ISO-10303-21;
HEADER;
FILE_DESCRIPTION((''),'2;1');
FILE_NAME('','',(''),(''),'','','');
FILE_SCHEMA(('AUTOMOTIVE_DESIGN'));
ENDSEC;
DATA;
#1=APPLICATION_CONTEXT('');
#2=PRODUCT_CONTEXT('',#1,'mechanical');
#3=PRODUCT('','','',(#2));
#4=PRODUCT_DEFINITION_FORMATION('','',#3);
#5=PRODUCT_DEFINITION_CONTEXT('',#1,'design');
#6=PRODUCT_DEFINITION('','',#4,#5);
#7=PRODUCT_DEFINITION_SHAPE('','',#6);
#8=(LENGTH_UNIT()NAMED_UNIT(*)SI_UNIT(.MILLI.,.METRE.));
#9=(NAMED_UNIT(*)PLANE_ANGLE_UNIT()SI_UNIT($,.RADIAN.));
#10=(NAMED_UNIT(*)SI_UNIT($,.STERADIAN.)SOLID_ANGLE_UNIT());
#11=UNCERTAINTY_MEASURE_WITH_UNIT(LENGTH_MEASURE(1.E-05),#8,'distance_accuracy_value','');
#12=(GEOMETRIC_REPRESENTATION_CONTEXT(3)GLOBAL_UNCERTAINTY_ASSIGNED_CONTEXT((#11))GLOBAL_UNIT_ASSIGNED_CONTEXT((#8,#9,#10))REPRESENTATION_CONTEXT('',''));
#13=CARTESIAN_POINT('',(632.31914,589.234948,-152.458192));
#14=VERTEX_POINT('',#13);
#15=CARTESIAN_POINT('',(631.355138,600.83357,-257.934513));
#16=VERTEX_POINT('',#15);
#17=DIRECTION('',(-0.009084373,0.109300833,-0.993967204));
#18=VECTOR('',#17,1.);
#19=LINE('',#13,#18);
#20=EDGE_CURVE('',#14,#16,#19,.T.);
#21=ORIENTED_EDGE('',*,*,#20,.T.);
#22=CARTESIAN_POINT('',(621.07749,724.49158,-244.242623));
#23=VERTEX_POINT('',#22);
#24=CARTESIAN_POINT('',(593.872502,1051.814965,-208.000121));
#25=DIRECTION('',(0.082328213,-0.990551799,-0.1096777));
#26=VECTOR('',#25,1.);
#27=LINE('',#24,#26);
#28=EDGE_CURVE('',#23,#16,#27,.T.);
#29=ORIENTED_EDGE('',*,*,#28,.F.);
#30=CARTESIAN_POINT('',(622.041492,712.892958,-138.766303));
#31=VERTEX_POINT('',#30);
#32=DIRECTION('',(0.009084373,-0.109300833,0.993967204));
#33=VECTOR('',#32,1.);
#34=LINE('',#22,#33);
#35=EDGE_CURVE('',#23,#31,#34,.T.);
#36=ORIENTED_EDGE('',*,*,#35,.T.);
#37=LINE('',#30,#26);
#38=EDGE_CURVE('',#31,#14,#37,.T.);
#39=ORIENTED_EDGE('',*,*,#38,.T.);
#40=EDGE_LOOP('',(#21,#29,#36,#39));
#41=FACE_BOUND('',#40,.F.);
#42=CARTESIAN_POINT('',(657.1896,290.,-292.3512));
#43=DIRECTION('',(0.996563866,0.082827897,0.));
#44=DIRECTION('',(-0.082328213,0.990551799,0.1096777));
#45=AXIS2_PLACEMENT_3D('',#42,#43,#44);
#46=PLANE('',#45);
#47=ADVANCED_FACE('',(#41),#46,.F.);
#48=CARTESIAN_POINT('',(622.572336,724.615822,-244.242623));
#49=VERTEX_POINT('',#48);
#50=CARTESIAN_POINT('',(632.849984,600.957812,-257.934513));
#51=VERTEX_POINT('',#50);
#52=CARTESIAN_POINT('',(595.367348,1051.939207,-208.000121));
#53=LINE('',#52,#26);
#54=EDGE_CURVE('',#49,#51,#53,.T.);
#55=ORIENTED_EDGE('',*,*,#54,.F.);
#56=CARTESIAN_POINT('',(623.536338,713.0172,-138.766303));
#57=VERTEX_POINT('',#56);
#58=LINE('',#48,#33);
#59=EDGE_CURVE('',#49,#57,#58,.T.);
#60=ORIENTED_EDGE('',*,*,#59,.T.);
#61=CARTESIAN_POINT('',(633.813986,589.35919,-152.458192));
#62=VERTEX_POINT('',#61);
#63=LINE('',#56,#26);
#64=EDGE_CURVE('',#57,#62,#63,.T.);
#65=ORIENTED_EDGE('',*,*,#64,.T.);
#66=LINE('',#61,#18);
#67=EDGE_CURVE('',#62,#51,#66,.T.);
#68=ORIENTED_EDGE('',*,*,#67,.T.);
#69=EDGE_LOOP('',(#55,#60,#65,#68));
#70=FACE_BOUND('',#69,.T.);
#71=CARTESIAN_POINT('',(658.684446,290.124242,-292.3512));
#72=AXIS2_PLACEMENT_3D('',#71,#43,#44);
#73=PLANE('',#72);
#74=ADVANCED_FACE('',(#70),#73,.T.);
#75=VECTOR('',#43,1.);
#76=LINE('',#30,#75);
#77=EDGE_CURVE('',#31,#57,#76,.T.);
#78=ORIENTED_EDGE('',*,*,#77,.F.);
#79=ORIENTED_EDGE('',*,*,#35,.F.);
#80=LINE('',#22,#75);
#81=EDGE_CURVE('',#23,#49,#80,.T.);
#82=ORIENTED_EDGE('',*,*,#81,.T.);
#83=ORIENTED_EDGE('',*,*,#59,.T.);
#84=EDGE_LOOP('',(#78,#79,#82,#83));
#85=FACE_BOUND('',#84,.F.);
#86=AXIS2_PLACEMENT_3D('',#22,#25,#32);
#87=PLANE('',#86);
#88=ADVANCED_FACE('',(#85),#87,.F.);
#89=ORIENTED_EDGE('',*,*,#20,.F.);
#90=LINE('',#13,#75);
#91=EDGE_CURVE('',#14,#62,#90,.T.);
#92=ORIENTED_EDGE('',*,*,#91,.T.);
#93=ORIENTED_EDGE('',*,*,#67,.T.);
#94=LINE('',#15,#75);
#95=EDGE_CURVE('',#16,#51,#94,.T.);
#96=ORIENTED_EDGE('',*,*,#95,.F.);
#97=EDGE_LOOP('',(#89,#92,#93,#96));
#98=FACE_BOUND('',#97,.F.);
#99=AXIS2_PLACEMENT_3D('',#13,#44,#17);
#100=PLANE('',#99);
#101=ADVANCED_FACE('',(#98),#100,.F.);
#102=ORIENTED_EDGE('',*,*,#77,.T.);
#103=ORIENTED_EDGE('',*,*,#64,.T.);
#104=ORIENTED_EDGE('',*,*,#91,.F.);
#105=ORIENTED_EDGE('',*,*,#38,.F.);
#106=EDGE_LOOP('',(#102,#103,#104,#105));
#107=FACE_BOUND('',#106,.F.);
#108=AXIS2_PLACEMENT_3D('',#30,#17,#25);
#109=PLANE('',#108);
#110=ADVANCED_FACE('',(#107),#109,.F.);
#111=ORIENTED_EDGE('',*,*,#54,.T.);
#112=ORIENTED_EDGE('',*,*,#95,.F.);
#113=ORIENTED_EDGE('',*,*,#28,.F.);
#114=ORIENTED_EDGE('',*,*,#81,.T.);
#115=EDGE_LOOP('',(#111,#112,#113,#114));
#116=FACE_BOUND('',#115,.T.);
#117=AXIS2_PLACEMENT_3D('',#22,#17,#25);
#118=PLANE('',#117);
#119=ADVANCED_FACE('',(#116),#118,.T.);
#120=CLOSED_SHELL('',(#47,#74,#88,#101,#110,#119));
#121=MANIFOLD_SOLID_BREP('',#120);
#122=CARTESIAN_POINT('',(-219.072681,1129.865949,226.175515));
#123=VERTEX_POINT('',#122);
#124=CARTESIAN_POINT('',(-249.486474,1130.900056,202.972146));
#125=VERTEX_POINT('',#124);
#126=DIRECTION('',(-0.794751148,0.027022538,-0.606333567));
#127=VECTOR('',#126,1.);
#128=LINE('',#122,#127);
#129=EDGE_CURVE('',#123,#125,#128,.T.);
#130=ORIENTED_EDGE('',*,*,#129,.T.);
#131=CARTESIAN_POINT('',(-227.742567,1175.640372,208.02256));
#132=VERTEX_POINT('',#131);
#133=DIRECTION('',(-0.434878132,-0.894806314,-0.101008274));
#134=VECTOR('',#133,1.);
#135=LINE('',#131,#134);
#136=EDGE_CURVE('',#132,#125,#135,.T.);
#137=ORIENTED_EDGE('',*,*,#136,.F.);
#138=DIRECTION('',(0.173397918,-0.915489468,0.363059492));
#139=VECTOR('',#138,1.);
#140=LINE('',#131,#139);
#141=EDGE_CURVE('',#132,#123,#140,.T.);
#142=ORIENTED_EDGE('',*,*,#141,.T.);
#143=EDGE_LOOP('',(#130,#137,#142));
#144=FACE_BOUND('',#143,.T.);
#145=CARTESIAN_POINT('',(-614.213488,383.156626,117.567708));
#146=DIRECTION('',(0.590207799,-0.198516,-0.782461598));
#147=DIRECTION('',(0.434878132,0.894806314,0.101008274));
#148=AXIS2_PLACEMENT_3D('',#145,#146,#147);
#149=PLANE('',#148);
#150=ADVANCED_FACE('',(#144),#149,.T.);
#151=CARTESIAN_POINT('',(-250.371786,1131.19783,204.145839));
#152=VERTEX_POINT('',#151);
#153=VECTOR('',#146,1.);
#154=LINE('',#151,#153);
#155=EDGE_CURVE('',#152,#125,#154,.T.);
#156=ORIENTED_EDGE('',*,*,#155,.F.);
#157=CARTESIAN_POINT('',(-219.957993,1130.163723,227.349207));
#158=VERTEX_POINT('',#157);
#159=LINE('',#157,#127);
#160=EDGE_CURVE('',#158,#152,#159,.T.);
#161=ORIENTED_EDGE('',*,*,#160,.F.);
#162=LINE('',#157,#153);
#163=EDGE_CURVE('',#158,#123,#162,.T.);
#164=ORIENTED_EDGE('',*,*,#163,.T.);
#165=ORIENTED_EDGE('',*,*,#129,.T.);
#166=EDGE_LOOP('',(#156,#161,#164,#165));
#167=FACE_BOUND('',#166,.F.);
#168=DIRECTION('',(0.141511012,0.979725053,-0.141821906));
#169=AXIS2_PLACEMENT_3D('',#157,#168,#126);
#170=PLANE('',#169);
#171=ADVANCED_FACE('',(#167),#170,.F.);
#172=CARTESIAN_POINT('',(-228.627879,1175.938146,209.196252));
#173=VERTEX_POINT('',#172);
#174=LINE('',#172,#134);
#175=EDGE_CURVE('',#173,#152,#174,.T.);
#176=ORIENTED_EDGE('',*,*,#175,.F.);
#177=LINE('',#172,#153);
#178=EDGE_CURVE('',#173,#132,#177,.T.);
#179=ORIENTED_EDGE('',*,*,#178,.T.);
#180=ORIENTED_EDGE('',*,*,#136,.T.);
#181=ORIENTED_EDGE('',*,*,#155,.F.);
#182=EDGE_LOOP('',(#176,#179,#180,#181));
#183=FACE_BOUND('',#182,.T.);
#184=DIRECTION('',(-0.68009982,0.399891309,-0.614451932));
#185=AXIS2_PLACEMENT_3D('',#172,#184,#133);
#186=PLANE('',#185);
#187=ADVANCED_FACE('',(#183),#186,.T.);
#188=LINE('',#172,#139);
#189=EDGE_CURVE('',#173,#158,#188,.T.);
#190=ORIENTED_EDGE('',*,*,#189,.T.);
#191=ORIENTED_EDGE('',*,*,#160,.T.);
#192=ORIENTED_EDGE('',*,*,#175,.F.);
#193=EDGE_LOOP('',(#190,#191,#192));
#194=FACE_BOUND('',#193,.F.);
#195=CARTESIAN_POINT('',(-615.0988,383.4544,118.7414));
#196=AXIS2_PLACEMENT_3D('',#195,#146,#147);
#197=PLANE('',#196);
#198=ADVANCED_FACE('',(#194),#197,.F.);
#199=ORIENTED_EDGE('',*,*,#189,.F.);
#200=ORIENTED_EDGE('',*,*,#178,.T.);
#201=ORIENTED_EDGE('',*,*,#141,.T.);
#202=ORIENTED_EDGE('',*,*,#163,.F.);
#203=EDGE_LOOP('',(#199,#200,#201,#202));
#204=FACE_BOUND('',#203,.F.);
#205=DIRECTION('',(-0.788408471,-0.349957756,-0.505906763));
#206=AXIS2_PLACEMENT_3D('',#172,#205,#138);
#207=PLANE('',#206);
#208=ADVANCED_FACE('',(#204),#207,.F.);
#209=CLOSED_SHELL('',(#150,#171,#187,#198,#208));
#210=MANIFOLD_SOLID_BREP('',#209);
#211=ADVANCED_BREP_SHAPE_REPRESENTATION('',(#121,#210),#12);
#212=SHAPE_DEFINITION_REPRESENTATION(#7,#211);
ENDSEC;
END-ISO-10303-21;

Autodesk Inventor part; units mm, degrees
sketch "Assoalho" plane through (0, 0, 0) normal (0, 1, 0) x (-1, 0, 0)
  line L0 (0, 0) -> (0, -310)
  line L1 (-175, 0) -> (-175, -286.2)
  line L2 (-339, 0) -> (-339, -271.128)
  line L3 (-750, -208) -> (0, -310)
  line L4 (0, 0) -> (0, 310)
  line L5 (-175, 0) -> (-175, 286.2)
  line L6 (-339, 0) -> (-339, 271.128)
  line L7 (-750, 208) -> (0, 310)
  line L8 (-750, -208) -> (-750, 208)
  line L9 (0, -310) -> (-750, 208)
  dimension "d5" = 175
ref_plane "Plano de trabalho2" through (0, 290, 0) normal (0, 1, 0) x (-1, 0, 0)
sketch "SIM" plane through (0, 290, 0) normal (0, 1, 0) x (-1, 0, 0)
  line L0 (-635.0792, -210.9167) -> (-513.8339, -210.9167) construction
  line L1 (-1143.84, -208) -> (-685.527, -208)
  arc A0 (-592.0818, -237.4632) -> (-685.527, -208) centre (-685.527, -370.9167) ccw
  line L2 (-592.0818, -237.4632) -> (-492.7634, -307.0066)
  arc A1 (-492.7634, -307.0066) -> (-406.5021, -335.3679) centre (-402.6642, -178.3316) ccw
  line L3 (-406.5021, -335.3679) -> (72.8916, -347.0841)
  arc A2 (-685.4637, 215.6215) -> (-591.5206, 246.9682) centre (-688.2017, 380.2696) ccw
  line L4 (-591.5206, 246.9682) -> (-493.3722, 318.1534)
  arc A3 (-408.5522, 347.6124) -> (-493.3722, 318.1534) centre (-402.1758, 192.4142) ccw
  line L5 (-408.5522, 347.6124) -> (70.5804, 367.2979)
  line L6 (-1143.84, 208) -> (-1143.84, -208)
  line L7 (-1143.84, -208) -> (-1143.84, -238)
  line L8 (-1143.84, 208) -> (-1143.84, 238)
  line L9 (-685.4637, 215.6215) -> (-1143.84, 215.6215)
  point P0 (0, 0)
  point P1 (-1243.8402, -210.9167)
  point P2 (-454.8658, -337.1036)
  point P3 (-685.527, -210.9167)
  point P4 (-593.7548, -239.8524)
  point P5 (-1243.8402, 210.003)
  point P6 (-690.8063, 210.003)
  point P7 (-741.2541, 210.003)
  point P8 (-649.4819, 238.9387)
  point P9 (-741.2541, 370.003)
  point P10 (-1243.8402, 212.6709)
  point P11 (-454.8658, 338.8577)
  point P12 (-685.527, 212.6709)
  point P13 (-750, -208)
  point P14 (-1243.8402, -208)
  point P15 (-750, 208)
  point P16 (-1243.8402, 208)
  dimension "d43" = 220
  dimension "d120" = 30
ref_plane "Plano de trabalho6" through (1243.8402, 290, 0) normal (-0.9506165, 0.3103678, 0) x (0, 0, -1)
ref_plane "Plano de trabalho7" through (750, 0, -208) normal (0.0697565, -0.9975641, 0) x (0, 0, 1)
ref_plane "Plano de trabalho9" through (1243.8402, 290, -210.9167) normal (0.9596242, -0.2812853, 0) x (0, 0, 1)
ref_plane "angulo de ataque" through (1167.3877, 29.1774, -208.0001) normal (0.0693593, -0.9975917, 0) x (0, 0, 1)
sketch3d "FAB SUSP"
ref_plane "plano do tanque" through (-142.3505, 531.2591, -0.3087) normal (0.190809, -0.981627, 0.0005599) x (-0.0001453, 0.0005422, 0.9999998)
ref_plane "plano fire" through (0, 0, 0) normal (0.9816272, 0.190809, 0) x (0, 0, -1)
sketch "Firewall" plane through (0, 0, 0) normal (0.9816272, 0.190809, 0) x (0, 0, -1)
  line L0 (208.0001, 1199.5797) -> (378.6151, 762.8897)
  line L1 (-208.4266, 1199.9999) -> (-377.0246, 770.967)
  arc A0 (388.8009, 688.8354) -> (378.6151, 762.8897) centre (229.5857, 704.6638) ccw
  arc A1 (-377.0246, 770.967) -> (-387.4098, 697.4944) centre (-228.1101, 712.4478) ccw
  line L2 (-373.5449, 549.7904) -> (374.9777, 549.7904)
  line L3 (-340.0001, -0.2101) -> (340.0002, -0.2101)
  line L4 (310.0001, -0.4201) -> (-208.4266, 1199.9999)
  line L5 (-238.4267, 1199.76) -> (237.5731, 1199.76)
  line L6 (-387.4098, 697.4944) -> (-310, 0)
  line L7 (310.0001, -0.4201) -> (388.8009, 688.8354)
  point P0 (0, 0)
  point P1 (-350, 298.9658)
  point P2 (350.0001, 298.5456)
  point P3 (-395, 778.3526)
  point P4 (396.7361, 768.6549)
  dimension "d133" = 160
  dimension "d183" = 549.7904
sketch "Posição eixo final" plane through (0, 0, 0) normal (0, 0, 1) x (1, 0, 0)
  line L0 (0, 0) -> (-570, 0)
  line L1 (-570, 0) -> (-570, 10)
  circle A0 centre (-570, 10) radius 12.5
  dimension "d188" = 570
  dimension "d189" = 10
  dimension "d190" = 25
sketch3d "TRASEIRA"
sketch "OSIM" plane through (0, 290, 0) normal (0, 1, 0) x (-1, 0, 0)
  line L0 (-635.0792, -210.9167) -> (-513.8339, -210.9167) construction
  line L1 (0, 0) -> (-92.969, 0)
  line L2 (-1143.84, -208) -> (-790.5859, -208)
  line L3 (-719.9653, -235.2972) -> (-657.1896, -292.3512)
  arc A0 (-657.1896, -292.3512) -> (-591.7716, -319.5194) centre (-586.569, -214.6484) ccw
  line L4 (-1143.84, 208) -> (-790.5859, 208)
  line L5 (-719.9653, 235.2972) -> (-657.1896, 292.3512)
  arc A1 (-790.5859, 208) -> (-719.9653, 235.2972) centre (-790.5859, 313) ccw
  arc A2 (-591.7716, 319.5194) -> (-657.1896, 292.3512) centre (-586.569, 214.6484) ccw
  line L6 (-790.5859, -208) -> (-790.5859, -208)
  arc A3 (-719.9653, -235.2972) -> (-790.5859, -208) centre (-790.5859, -313) ccw
  line L7 (-591.7716, 319.5194) -> (56.424, 342.8186)
  line L8 (-591.7716, -319.5194) -> (56.1351, -343.6827)
  point P0 (-1243.8402, -210.9167)
  point P1 (-649.4819, 238.9387)
  point P2 (-690.8063, 210.003)
  point P3 (-741.2541, 370.003)
  point P4 (-741.2541, 210.003)
  point P5 (-1243.8402, 210.003)
  point P6 (-454.8658, 338.8577)
  point P7 (-685.527, 212.6709)
  point P8 (-1243.8402, 212.6709)
  point P9 (-1243.8402, -208)
  point P10 (-1243.8402, 208)
  point P11 (60.2645, -351.8668)
  point P12 (60.2645, 351.8668)
  dimension "d150" = 105
sketch3d "FAB,FBM,RHO"
sketch "Boneco De M" plane through (0, 0, 0) normal (0, 0, 1) x (1, 0, 0)
  line L0 (100.0575, 119.4039) -> (-125.5508, 886.933)
  line L1 (100.0575, 119.4039) -> (575.1964, 275.1055)
  line L2 (575.1964, 275.1055) -> (1019.3106, 68.0728)
  line L3 (100.0575, 119.4039) -> (-69.1487, 695.0507)
  line L4 (-69.1487, 695.0507) -> (87.7059, 404.7119)
  line L5 (-69.1487, 695.0507) -> (260.8513, 695.0507) construction
  line L6 (87.7059, 404.7119) -> (397.1666, 422.9889)
  arc A0 (-79.7011, 730.9504) -> (-125.5508, 886.933) centre (-81.3953, 815.1823) ccw
  point P0 (0, 0)
  dimension "d169" = 800
  dimension "d170" = 500
  dimension "d171" = 490
  dimension "d172" = 600
  dimension "d175" = 88.236
  dimension "d178" = 330
  dimension "d179" = 61.62
  dimension "d180" = 310
  dimension "d181" = 115
  dimension "d182" = 136.863
ref_plane "Plano de trabalho15" through (15.4115, 2.9957, 0) normal (0.9816272, 0.190809, 0) x (0, 0, -1)
sketch "Esboço26" plane through (-142.3505, 531.2591, -0.3087) normal (0.190809, -0.981627, 0.0005599) x (-0.0001453, 0.0005422, 0.9999998)
  line L0 (-373.237, -38.3514) -> (-160.541, 418.9921) projected
  line L1 (-305.8589, 106.5265) -> (-160.541, 106.5265)
  line L2 (-160.541, 106.5265) -> (-160.541, -38.3514)
  point P0 (0, -38.3661)
  point P1 (-139.1534, 464.9803)
ref_plane "Plano de trabalho16" through (657.1896, 290, -292.3512) normal (0.9965639, 0.0828279, 0) x (-0.0823282, 0.9905518, 0.1096777)
sketch "Esboço27" plane through (657.1896, 290, -292.3512) normal (0.9965639, 0.0828279, 0) x (-0.0823282, 0.9905518, 0.1096777)
  line L0 (769.0814, 0) -> (0, 0) projected
  line L1 (313.7984, 0) -> (438.6359, 0)
  line L2 (438.6359, 0) -> (438.6359, 106.1165)
  line L3 (438.6359, 106.1165) -> (313.7984, 106.1165)
  line L4 (313.7984, 106.1165) -> (313.7984, 0)
  point P0 (-201.0904, 316.3146)
ref_plane "Plano de trabalho18" through (750, 0, 428) normal (-0.0000001, 0.0000002, 1) x (0.9975656, 0.0697345, 0.0000001)
ref_plane "Plano de trabalho17" through (750, 0, 208) normal (-0.0000001, 0.0000002, 1) x (0.9975656, 0.0697345, 0.0000001)
extrude "Extrusão1" add sketch "Esboço27" along normal blind 1.5
sketch3d "Esboço 3D15"
ref_plane "Plano de trabalho19" through (621.7577, 699.6987, 151.4268) normal (-0.99659, -0.0812596, 0.0143283) x (0.0823337, -0.9907596, 0.1077804)
ref_plane "Plano de trabalho20" through (-615.0988, 383.4544, 118.7414) normal (0.5902078, -0.198516, -0.7824616) x (0.4348781, 0.8948063, 0.1010083)
sketch "Esboço28" plane through (-615.0988, 383.4544, 118.7414) normal (0.5902078, -0.198516, -0.7824616) x (0.4348781, 0.8948063, 0.1010083)
  line L0 (886.3239, 1.5116) -> (836.3239, 1.5116)
  line L1 (886.3239, 1.5116) -> (850.9686, 36.8669)
  line L2 (850.9686, 36.8669) -> (836.3239, 1.5116)
  point P0 (-87.6183, 498.7078)
  dimension "d245" = 50
  dimension "d246" = 50
extrude "Extrusão2" add sketch "Esboço28" along normal blind 1.5
properties part number "111"
